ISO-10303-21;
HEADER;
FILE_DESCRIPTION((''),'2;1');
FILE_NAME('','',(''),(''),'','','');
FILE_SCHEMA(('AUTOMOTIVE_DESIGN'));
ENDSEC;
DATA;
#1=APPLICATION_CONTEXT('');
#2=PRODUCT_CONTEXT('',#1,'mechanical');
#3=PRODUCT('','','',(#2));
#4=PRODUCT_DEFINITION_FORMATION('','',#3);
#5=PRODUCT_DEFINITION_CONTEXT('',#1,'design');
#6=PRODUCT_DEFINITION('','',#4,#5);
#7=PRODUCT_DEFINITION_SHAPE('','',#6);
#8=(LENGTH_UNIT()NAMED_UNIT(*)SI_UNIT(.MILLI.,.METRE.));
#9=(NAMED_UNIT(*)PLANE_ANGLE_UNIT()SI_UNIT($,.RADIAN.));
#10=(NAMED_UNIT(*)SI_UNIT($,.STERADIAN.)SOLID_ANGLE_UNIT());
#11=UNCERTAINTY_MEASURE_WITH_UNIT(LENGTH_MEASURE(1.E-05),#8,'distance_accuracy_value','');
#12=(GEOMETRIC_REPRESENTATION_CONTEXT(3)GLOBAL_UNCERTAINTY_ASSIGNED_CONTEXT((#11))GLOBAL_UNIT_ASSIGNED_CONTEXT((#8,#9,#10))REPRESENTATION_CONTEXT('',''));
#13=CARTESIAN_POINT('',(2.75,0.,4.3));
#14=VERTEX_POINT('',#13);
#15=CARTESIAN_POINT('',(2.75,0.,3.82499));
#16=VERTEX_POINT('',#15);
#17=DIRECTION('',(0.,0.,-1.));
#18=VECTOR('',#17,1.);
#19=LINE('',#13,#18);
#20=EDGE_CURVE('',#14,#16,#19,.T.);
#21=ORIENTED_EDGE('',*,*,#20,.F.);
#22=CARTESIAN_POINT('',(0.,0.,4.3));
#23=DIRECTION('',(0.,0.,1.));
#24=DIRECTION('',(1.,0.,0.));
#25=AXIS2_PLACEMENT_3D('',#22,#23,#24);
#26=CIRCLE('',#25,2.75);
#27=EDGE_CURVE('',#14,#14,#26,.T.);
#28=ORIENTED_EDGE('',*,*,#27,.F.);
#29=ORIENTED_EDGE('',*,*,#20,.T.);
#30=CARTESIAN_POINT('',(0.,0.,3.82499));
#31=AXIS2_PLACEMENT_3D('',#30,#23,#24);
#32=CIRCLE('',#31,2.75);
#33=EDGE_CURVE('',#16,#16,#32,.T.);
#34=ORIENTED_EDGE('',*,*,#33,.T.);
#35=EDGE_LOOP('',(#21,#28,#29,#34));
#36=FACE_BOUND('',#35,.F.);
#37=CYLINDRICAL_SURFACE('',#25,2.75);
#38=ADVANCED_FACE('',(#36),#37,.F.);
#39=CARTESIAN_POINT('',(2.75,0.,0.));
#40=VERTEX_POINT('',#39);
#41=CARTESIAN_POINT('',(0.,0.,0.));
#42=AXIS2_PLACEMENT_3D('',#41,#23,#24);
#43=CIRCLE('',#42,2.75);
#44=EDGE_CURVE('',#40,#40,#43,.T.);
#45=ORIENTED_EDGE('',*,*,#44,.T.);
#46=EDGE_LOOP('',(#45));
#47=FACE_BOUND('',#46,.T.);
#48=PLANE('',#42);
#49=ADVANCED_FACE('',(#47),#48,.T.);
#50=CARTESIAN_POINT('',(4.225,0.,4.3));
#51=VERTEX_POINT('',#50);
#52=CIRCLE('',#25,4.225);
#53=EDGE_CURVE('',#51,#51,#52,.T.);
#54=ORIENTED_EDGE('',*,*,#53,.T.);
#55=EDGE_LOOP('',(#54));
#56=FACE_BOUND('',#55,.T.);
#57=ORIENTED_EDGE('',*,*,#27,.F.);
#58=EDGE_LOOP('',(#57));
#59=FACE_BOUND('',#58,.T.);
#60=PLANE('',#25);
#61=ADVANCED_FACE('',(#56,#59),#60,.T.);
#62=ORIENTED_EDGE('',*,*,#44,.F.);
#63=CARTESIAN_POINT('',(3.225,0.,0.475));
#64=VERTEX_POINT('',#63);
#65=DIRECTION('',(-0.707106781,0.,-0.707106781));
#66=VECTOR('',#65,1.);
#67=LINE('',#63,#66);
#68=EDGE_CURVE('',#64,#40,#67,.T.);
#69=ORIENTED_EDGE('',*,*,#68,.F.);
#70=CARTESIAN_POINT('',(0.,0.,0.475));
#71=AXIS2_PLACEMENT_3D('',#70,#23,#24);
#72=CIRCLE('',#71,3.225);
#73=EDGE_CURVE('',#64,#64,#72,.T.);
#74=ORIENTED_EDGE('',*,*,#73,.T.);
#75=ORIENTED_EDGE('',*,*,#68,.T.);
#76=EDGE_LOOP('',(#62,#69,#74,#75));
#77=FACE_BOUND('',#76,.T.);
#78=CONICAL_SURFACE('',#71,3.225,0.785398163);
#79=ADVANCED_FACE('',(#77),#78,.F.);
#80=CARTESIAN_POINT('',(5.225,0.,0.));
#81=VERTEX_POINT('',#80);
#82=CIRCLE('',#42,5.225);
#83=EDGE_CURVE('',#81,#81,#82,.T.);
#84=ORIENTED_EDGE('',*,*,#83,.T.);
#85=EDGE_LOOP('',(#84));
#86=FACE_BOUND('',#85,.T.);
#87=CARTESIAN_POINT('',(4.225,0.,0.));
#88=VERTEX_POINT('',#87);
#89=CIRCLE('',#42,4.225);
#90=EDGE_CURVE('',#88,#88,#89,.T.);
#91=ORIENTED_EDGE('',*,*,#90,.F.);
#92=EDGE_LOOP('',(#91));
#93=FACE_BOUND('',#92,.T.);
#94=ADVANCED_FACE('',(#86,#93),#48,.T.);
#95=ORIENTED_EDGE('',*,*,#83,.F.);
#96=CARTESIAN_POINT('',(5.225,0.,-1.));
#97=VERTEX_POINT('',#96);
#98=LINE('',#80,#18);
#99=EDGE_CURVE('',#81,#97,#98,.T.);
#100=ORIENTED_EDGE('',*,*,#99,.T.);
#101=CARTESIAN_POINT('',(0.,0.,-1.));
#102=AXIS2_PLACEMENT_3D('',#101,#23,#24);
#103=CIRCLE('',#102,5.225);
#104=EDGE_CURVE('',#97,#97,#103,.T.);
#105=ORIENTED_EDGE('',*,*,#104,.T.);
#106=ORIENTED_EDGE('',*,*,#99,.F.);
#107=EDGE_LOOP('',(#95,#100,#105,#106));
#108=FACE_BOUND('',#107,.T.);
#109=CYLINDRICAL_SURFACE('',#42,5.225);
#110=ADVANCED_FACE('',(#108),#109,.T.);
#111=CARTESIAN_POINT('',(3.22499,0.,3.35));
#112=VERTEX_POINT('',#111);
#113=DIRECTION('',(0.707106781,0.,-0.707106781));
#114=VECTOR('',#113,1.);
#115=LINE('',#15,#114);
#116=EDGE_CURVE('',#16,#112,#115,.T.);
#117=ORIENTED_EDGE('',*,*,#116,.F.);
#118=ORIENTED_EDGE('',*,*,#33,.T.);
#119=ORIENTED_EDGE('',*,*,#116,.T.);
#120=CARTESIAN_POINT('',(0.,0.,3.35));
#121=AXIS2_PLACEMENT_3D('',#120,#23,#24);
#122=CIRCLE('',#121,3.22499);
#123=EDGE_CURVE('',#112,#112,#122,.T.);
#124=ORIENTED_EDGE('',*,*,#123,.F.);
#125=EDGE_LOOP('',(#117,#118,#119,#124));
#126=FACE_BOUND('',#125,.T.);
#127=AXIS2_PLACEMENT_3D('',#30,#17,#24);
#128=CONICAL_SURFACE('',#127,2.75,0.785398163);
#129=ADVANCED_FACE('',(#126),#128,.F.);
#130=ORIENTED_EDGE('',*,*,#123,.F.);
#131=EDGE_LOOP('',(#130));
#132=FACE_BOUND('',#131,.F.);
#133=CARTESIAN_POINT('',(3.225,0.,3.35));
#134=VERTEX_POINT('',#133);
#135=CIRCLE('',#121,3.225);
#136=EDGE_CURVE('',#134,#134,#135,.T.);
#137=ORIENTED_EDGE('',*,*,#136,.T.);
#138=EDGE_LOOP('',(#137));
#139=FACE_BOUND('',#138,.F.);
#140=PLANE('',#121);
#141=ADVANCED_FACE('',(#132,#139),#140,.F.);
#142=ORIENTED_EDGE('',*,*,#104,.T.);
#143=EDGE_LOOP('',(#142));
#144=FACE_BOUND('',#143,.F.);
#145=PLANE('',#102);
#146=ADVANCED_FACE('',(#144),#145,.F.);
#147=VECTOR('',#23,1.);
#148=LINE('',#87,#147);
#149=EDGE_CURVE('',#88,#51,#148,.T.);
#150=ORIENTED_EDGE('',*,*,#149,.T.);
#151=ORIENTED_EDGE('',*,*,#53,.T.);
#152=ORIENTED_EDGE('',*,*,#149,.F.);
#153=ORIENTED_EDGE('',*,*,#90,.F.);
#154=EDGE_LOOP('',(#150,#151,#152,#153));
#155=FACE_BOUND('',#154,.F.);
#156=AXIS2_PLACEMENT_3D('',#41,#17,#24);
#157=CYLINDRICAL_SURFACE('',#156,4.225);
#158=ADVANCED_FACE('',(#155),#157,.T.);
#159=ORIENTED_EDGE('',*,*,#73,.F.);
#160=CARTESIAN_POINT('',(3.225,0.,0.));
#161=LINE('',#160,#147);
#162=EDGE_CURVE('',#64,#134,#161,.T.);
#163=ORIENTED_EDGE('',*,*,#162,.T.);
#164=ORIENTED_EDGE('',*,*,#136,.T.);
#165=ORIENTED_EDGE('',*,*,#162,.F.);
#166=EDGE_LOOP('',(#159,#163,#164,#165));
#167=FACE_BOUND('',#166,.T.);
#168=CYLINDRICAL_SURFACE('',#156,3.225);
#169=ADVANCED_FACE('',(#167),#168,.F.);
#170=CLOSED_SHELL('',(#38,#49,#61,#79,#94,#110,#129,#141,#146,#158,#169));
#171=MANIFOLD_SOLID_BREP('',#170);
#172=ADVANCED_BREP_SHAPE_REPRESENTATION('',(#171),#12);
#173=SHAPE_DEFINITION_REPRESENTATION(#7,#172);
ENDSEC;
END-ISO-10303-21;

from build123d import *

# Parameters (mm, degrees)
F6_R      = 5.225
F7_DEPTH  = 1
F5_R      = 4.225
F5_R_2    = 3.225
F8_DEPTH  = 4.3
F9_R      = 3.225
F9_R_2    = 2.75
F10_DEPTH = 0.95
F11_SIZE  = 0.47499
F12_SIZE  = 0.475


# Not quite as in the source:
# - a fillet or chamfer is up to 0.001 mm smaller than in the source, because OpenCascade refuses the exact size


with BuildPart() as f7:
    # F6 (on face) → F7 (new body)
    with BuildSketch(Plane.XY):
        Circle(F6_R)
    extrude(amount=-F7_DEPTH)



with BuildPart() as f7b:
    # F5 (on Top) → F7, piece 2 (new body)
    with BuildSketch(Plane.XY):
        Circle(F5_R)
        Circle(F5_R_2, mode=Mode.SUBTRACT)
    extrude(amount=-F7_DEPTH)


with BuildPart() as f7_1:
    add(f7.part)

    add(f7b.part)  # F8 merges F7b
    # F5 (on Top) → F8 (join)
    with BuildSketch(Plane.XY):
        Circle(F5_R)
        Circle(F5_R_2, mode=Mode.SUBTRACT)
    extrude(amount=F8_DEPTH)

    # F9 (on face) → F10 (join)
    with BuildSketch(Plane.XY.offset(4.3)):
        Circle(F9_R)
        Circle(F9_R_2, mode=Mode.SUBTRACT)
    extrude(amount=-F10_DEPTH)

    # F11 (size 0.475 in the source; OpenCascade refuses exactly that, so slightly less here)
    f11_edges = [f7_1.edges().sort_by_distance(p)[0] for p in [
        (-2.75, 0, 3.35),
    ]]
    chamfer(f11_edges, length=F11_SIZE)

    # F12
    f12_edges = [f7_1.edges().sort_by_distance(p)[0] for p in [
        (-3.225, 0, 0),
    ]]
    chamfer(f12_edges, length=F12_SIZE)


solid = f7_1.part
